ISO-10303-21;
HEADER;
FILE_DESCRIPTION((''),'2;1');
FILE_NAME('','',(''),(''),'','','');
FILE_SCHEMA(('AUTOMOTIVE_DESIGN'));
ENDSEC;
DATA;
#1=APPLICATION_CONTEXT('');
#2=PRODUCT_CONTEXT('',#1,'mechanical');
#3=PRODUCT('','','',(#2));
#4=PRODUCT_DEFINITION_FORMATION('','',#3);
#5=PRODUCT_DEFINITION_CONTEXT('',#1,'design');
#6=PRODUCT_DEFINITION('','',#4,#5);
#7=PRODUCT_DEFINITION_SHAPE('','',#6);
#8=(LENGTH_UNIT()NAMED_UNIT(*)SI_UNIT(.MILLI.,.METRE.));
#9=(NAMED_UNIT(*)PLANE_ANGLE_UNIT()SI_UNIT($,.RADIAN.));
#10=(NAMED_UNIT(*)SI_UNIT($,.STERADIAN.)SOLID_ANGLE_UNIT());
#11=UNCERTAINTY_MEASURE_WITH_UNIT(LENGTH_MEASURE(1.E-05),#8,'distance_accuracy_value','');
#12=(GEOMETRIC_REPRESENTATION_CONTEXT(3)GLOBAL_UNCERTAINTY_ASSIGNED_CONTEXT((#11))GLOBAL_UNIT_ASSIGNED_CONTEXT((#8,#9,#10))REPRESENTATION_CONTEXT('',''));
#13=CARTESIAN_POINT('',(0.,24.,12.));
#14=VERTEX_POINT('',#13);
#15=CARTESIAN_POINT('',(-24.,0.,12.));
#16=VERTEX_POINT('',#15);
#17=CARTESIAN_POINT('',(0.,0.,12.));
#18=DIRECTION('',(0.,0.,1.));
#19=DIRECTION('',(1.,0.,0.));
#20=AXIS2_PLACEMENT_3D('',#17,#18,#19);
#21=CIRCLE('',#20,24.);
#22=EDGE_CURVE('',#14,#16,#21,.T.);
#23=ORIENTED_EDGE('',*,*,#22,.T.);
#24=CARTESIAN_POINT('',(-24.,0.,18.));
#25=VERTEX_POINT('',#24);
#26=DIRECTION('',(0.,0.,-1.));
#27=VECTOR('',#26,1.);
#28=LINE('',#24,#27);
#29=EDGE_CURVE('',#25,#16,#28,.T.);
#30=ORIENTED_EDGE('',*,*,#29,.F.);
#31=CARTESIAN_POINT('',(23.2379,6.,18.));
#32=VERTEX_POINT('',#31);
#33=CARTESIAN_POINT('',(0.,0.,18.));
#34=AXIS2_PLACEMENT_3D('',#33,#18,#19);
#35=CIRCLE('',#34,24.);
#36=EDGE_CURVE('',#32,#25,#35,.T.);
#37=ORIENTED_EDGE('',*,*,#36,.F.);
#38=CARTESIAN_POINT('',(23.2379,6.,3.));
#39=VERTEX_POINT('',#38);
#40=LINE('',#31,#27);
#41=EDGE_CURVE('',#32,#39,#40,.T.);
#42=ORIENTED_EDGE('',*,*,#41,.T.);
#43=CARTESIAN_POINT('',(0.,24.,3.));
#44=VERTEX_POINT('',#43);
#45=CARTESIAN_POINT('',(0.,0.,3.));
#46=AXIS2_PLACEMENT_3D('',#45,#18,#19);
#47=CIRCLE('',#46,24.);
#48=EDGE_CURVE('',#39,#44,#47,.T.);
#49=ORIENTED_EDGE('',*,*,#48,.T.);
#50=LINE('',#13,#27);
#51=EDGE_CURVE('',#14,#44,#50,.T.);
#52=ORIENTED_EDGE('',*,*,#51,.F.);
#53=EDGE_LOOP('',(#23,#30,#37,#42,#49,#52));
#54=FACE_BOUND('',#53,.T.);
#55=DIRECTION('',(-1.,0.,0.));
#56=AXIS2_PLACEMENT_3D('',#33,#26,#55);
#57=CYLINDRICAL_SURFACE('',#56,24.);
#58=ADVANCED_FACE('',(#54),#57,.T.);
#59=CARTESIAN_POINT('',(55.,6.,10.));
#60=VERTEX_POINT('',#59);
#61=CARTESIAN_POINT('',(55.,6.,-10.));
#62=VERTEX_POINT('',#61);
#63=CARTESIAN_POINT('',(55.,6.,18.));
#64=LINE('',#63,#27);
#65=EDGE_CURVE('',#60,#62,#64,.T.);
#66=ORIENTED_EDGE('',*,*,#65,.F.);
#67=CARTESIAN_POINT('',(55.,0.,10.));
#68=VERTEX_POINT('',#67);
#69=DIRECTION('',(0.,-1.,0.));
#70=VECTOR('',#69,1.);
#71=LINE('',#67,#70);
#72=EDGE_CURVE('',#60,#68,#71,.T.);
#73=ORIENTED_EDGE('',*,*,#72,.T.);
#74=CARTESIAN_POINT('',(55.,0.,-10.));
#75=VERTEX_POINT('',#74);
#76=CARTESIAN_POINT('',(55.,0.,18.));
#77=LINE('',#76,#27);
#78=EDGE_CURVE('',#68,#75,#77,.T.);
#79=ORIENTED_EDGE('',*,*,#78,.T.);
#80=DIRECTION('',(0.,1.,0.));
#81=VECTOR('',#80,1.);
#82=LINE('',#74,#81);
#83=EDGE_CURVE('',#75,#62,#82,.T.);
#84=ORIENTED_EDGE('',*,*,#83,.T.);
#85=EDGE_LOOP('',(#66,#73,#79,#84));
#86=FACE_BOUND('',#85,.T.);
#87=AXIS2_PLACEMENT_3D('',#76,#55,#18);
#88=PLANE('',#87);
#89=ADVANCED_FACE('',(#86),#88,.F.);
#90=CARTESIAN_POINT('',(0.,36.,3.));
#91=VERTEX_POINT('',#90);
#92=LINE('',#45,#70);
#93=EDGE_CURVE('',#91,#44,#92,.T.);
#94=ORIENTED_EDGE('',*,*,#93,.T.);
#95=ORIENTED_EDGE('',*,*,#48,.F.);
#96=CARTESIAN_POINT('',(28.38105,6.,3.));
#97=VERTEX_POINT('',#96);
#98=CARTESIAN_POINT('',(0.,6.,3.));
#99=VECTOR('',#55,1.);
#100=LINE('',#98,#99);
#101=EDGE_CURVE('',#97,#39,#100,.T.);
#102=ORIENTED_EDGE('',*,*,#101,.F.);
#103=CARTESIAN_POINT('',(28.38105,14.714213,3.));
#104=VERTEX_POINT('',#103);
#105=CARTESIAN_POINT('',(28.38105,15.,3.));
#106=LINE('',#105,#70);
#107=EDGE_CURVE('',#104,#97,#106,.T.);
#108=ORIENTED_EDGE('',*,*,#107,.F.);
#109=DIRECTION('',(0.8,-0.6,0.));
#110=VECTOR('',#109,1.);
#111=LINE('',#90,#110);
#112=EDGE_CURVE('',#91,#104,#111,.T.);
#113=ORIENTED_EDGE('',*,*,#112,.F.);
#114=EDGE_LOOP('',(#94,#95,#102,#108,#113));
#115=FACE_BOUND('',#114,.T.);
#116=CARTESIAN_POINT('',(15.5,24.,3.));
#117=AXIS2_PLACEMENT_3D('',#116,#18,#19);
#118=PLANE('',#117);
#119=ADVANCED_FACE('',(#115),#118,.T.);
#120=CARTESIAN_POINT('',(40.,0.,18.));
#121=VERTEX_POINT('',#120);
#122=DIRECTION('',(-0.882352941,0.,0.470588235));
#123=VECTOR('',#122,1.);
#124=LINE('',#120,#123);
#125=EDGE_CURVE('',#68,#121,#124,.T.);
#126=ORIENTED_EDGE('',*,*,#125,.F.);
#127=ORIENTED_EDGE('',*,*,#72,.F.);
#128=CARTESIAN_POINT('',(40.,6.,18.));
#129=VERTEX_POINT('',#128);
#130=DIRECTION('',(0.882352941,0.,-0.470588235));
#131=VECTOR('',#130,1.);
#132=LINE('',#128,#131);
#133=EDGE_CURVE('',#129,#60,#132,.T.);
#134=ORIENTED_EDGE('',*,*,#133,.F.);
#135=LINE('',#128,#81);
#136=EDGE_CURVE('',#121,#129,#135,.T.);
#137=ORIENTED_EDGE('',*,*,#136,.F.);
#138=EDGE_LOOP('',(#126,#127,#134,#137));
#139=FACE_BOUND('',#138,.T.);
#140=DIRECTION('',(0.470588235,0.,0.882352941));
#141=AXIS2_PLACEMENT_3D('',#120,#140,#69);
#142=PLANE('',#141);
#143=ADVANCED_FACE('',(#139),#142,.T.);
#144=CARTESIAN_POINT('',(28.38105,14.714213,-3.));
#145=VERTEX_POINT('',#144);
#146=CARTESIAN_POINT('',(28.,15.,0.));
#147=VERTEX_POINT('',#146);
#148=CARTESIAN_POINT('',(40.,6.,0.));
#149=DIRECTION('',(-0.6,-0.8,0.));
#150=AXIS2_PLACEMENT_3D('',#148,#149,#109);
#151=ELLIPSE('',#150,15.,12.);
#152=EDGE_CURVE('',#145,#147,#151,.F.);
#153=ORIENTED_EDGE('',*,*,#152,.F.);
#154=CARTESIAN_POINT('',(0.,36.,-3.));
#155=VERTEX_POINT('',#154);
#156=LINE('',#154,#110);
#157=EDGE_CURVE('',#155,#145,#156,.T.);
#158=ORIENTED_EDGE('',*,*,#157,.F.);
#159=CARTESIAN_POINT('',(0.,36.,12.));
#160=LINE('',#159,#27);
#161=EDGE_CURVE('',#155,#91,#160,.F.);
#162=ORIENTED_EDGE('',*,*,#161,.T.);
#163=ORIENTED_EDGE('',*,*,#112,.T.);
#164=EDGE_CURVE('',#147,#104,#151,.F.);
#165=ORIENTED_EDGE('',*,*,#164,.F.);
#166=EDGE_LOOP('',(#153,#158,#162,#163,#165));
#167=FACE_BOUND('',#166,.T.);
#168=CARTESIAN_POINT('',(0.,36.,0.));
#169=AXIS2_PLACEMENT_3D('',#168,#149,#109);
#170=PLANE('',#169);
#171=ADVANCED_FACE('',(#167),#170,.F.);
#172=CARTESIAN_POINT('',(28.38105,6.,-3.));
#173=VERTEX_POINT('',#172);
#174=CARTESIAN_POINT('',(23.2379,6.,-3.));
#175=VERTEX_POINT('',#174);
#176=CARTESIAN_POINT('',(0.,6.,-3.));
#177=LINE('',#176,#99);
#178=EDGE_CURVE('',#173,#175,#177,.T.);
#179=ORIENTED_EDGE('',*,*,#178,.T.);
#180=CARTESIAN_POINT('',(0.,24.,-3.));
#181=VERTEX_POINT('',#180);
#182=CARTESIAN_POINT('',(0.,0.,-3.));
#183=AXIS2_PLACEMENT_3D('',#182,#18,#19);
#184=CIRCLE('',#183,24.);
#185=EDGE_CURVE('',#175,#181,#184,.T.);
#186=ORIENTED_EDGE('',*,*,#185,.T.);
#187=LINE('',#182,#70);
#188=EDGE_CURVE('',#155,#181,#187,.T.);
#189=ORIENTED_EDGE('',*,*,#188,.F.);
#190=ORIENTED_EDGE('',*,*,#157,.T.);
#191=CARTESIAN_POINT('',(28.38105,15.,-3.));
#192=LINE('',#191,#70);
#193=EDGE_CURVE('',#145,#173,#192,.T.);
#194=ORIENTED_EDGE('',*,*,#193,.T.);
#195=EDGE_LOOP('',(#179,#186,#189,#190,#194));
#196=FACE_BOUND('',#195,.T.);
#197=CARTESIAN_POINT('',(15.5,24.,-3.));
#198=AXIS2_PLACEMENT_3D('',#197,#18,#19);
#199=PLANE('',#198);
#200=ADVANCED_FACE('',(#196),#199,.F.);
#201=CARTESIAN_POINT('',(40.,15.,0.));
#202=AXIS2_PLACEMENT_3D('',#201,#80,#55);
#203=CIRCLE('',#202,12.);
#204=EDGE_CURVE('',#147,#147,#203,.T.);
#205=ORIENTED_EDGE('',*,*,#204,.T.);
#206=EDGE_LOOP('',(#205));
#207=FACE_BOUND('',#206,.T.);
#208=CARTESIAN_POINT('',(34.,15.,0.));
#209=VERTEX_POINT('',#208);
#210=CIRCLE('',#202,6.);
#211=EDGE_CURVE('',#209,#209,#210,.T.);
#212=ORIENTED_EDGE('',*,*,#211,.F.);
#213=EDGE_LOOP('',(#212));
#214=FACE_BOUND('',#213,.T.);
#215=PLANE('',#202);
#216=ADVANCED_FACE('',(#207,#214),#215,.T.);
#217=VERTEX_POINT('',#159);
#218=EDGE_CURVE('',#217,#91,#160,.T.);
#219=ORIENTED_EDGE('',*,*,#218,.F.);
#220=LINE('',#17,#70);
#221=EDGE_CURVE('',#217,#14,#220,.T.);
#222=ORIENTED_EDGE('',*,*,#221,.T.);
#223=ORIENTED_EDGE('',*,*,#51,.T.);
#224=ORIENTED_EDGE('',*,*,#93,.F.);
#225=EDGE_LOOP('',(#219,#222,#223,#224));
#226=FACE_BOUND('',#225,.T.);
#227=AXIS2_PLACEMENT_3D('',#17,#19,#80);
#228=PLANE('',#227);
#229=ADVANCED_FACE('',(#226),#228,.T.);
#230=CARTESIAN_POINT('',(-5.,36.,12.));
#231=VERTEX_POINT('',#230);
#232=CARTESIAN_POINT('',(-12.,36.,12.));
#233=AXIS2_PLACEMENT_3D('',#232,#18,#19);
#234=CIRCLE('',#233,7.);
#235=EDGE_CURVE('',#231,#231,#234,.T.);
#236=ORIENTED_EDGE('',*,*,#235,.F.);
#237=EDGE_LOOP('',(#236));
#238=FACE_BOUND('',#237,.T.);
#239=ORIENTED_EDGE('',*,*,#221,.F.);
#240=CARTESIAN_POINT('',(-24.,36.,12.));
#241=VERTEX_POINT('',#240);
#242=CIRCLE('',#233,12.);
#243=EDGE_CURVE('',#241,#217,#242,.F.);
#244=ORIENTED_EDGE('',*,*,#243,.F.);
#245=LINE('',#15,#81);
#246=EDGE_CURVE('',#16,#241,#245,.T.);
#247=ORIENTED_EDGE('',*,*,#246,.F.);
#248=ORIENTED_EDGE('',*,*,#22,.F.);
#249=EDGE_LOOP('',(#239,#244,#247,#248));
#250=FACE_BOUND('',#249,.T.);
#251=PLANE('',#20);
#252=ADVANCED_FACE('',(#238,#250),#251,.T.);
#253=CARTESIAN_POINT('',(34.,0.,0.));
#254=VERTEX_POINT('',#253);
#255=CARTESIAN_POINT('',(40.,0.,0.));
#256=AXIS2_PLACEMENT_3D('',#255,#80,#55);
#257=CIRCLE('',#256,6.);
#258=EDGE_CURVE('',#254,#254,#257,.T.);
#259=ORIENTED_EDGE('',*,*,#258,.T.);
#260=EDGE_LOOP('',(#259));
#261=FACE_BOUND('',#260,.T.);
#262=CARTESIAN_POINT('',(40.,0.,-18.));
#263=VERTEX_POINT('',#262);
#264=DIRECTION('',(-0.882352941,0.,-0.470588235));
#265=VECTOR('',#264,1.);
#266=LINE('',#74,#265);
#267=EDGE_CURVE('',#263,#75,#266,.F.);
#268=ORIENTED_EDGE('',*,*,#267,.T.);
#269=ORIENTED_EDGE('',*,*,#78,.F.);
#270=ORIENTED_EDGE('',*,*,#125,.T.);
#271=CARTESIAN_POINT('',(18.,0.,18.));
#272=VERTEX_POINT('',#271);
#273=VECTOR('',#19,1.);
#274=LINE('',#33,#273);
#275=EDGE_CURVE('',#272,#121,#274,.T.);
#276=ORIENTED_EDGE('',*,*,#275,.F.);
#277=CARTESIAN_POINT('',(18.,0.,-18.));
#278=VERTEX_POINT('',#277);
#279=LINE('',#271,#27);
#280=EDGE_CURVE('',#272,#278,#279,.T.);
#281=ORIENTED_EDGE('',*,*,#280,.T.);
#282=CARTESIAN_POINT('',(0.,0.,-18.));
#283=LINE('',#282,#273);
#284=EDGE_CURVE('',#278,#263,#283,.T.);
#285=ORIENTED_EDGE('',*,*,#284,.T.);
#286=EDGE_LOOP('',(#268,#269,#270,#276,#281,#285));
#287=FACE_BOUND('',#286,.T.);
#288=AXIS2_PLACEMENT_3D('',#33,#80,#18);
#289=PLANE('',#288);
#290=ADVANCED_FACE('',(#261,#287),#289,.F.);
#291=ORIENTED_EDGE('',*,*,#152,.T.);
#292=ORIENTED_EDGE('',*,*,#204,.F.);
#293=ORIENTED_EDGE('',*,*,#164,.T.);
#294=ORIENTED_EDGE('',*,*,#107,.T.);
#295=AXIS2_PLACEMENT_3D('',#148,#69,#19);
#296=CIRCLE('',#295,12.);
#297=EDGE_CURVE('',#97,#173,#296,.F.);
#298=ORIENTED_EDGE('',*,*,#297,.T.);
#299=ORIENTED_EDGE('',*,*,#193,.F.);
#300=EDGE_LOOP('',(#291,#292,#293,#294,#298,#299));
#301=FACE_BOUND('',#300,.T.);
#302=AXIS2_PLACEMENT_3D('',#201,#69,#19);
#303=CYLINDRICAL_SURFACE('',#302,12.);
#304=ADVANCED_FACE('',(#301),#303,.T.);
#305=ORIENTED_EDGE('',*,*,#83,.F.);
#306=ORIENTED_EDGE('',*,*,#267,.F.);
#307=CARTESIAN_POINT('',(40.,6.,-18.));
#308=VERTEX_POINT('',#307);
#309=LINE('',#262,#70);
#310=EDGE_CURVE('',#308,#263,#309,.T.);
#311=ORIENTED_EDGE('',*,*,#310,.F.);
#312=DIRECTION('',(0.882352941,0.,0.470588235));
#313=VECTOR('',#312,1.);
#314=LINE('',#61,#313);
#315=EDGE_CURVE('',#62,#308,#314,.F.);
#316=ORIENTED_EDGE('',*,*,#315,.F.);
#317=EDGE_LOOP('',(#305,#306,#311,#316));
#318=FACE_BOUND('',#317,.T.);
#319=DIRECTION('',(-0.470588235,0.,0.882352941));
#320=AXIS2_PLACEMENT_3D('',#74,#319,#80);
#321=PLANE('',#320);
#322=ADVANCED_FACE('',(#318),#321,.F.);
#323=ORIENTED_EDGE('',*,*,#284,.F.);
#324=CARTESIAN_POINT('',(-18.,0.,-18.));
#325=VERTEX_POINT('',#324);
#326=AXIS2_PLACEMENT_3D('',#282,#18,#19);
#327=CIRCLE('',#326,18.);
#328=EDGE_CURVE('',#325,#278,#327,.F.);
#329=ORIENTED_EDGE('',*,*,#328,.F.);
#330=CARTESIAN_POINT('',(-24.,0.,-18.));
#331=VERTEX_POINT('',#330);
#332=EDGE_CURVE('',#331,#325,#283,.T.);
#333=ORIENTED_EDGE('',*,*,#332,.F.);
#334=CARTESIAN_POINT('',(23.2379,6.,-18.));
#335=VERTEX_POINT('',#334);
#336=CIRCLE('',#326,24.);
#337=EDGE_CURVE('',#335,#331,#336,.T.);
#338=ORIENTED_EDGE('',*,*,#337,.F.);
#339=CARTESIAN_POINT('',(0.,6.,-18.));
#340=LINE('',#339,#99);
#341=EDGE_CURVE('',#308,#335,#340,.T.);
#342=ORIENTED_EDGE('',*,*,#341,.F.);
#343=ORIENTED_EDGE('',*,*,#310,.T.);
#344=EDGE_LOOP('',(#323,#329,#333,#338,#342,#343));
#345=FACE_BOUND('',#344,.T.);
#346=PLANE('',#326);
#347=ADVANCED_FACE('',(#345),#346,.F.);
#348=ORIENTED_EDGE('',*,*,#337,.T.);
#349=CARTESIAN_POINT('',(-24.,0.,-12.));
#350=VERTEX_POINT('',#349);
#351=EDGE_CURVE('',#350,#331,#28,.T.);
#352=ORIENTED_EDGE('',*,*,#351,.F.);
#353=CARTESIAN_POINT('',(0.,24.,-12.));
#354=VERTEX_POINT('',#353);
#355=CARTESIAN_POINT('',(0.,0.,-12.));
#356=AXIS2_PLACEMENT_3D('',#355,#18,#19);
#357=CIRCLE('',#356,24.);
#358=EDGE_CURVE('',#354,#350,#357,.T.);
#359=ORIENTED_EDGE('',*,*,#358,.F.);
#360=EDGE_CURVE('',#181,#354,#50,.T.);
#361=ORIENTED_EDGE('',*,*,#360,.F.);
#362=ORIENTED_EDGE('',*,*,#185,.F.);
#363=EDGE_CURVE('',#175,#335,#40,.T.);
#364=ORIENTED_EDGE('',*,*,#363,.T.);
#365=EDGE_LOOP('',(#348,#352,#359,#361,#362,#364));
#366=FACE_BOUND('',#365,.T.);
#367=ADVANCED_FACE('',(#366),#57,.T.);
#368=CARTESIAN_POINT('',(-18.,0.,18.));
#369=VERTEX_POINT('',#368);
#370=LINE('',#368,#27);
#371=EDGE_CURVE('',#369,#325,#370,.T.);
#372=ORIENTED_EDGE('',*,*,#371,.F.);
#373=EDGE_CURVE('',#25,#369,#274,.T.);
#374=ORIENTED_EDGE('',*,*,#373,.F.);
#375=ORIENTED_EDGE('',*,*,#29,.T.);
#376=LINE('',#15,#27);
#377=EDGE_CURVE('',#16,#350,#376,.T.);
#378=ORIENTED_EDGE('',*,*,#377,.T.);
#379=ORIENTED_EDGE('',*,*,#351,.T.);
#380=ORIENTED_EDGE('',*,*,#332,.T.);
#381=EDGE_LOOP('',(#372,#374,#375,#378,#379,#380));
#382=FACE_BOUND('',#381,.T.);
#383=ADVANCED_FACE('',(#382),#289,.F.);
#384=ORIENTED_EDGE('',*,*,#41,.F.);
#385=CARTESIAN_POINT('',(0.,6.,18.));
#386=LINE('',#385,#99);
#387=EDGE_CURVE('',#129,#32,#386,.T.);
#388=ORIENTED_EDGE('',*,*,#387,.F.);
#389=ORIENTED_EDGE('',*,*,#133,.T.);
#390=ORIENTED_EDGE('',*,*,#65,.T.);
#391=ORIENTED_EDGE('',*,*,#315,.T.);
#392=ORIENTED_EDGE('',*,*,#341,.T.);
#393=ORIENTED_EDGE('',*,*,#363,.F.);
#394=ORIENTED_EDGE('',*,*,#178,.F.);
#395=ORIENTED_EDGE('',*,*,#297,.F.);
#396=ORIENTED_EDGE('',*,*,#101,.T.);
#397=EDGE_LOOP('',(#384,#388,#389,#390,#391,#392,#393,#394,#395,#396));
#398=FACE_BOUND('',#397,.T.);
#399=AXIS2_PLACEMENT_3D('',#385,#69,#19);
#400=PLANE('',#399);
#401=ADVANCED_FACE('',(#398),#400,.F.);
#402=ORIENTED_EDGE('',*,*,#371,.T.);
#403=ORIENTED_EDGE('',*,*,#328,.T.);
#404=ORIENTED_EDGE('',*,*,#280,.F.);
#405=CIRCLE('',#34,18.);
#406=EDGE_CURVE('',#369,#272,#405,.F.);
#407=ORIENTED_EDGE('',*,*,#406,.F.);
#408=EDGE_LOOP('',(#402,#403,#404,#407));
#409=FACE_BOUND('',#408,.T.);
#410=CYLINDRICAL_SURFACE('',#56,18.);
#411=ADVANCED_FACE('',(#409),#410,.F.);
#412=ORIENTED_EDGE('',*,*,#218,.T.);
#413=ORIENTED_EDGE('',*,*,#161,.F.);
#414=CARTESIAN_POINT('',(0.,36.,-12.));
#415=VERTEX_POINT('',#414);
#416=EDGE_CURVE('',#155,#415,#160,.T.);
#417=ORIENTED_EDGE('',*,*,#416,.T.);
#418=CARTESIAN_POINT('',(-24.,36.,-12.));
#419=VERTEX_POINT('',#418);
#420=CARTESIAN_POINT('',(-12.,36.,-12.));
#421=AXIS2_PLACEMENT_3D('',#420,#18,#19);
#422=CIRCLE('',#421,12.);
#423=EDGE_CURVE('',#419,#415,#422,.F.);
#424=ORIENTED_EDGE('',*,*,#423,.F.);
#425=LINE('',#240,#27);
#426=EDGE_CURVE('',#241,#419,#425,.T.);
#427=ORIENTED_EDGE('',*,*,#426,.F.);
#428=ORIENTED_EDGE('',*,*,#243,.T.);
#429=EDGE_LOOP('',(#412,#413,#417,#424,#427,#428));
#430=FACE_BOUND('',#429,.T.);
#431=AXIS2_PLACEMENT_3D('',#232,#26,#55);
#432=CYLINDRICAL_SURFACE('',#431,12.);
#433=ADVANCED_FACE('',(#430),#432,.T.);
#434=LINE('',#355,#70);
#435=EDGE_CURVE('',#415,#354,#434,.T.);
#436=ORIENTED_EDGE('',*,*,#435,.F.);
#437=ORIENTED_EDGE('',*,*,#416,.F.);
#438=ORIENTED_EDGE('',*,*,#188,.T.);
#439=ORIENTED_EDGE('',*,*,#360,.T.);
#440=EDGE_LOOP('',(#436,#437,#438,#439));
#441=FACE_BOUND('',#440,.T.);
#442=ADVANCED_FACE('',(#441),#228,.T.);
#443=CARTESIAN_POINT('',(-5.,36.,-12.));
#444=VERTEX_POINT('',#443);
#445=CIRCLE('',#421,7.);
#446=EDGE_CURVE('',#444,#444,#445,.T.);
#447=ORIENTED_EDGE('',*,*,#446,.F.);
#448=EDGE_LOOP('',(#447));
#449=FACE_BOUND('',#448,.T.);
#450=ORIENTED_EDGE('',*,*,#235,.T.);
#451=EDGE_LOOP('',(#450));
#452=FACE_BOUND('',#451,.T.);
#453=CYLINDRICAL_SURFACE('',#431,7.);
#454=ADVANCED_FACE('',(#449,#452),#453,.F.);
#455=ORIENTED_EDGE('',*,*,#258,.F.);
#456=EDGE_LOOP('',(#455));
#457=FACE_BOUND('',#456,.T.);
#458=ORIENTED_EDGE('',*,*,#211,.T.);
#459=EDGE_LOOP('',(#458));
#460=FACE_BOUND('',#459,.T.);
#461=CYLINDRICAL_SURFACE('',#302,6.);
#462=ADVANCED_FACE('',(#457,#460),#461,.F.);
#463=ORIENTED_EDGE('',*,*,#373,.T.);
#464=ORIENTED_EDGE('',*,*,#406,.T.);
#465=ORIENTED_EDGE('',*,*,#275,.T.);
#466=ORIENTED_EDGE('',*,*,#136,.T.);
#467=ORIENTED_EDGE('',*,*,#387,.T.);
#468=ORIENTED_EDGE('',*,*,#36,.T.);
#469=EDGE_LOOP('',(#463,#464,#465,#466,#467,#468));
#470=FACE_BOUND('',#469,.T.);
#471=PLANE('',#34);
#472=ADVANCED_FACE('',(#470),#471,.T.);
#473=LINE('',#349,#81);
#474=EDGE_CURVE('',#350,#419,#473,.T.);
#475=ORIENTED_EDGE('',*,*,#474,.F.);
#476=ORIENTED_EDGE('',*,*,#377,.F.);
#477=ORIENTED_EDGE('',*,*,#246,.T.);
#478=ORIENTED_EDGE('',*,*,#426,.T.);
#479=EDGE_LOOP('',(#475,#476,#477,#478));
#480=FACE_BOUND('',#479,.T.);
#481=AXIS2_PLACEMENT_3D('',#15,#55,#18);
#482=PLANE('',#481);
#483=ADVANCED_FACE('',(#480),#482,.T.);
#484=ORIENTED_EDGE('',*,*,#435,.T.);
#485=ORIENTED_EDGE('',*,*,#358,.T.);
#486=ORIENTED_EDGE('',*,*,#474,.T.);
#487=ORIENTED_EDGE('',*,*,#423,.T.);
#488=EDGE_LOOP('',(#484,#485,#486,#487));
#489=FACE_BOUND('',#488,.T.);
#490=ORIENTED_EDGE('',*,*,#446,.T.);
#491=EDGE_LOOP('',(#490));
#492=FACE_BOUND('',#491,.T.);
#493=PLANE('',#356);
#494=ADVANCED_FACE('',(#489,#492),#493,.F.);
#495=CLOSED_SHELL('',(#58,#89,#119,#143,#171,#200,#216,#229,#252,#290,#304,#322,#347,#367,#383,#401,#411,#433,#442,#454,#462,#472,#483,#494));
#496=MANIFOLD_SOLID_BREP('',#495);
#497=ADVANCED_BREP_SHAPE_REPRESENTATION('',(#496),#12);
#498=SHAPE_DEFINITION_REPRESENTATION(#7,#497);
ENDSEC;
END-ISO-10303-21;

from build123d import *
from build123d.topology import SkipClean

# Parameters (mm, degrees)
BOSS_EXTRUDE1_DEPTH = 18
SKETCH1_3_R         = 7
BOSS_EXTRUDE2_DEPTH = 12
SKETCH2_R           = 12
SKETCH2_R_2         = 6
BOSS_EXTRUDE3_DEPTH = 9
RIB1_START          = -3
RIB1_DEPTH          = 6
CHAMFER1_SIZE       = 8
CHAMFER1_SIZE2      = 15
CHAMFER2_SIZE       = 15
CHAMFER2_SIZE2      = 8
SKETCH2_2_R         = 6
CUT_EXTRUDE1_DEPTH  = 72.505244563


# Read off the part's stored shape, not the designer's step: Rib1
with BuildPart() as part:
    # Sketch1 → Boss-Extrude1 (new, symmetric)
    with BuildSketch(Plane.XY):
        with BuildLine():
            Line((18, 0), (24, 0))
            ThreePointArc((24, 0), (0, 24), (-24, 0))
            Line((-24, 0), (-18, 0))
            ThreePointArc((-18, 0), (0, 18), (18, 0))
        make_face()
        with BuildLine():
            Line((55, 6), (23.237900077, 6))
            ThreePointArc((23.237900077, 6), (23.80871271, 3.02410302), (24, 0))
            Line((24, 0), (55, 0))
            Line((55, 0), (55, 6))
        make_face()
    extrude(amount=BOSS_EXTRUDE1_DEPTH, both=True)

    # Sketch1<3> → Boss-Extrude2 (add, symmetric)
    with BuildSketch(Plane.XY):
        with BuildLine():
            Line((-24, 36), (-24, 0))
            ThreePointArc((-24, 0), (-16.970562748, 16.970562748), (0, 24))
            Line((0, 24), (0, 36))
            ThreePointArc((0, 36), (-12, 48), (-24, 36))
        make_face()
        with Locations((-12, 36)):
            Circle(SKETCH1_3_R, mode=Mode.SUBTRACT)
    extrude(amount=BOSS_EXTRUDE2_DEPTH, both=True)

    # Sketch2 → Boss-Extrude3 (add)
    with BuildSketch(Plane(origin=(0, 6, 0), x_dir=(1, 0, 0), z_dir=(0, 1, 0))):
        with Locations((40, 0)):
            Circle(SKETCH2_R)
        with Locations(Location((40, 0, 0), (0, 0, 180))):
            Circle(SKETCH2_R_2, mode=Mode.SUBTRACT)
    extrude(amount=BOSS_EXTRUDE3_DEPTH)

    # Rib1 outline → Rib1 (add)
    with SkipClean():  # the faces are left unmerged after this step: merging them gives an invalid solid
        with BuildSketch(Plane.XY.offset(RIB1_START)):
            with BuildLine():
                Line((28.381049961, 14.714212529), (0, 36))
                Line((0, 36), (0, 24))
                ThreePointArc((0, 24), (14.696938456, 18.973665961), (23.237900077, 6))
                Line((23.237900077, 6), (30, 6))
                Line((30, 6), (30, 13.5))
                Line((30, 13.5), (28.381049961, 14.714212529))
            make_face()
        extrude(amount=RIB1_DEPTH)

    # Chamfer1
    chamfer1_edges = [part.edges().sort_by_distance(p)[0] for p in [
        (55, 3, 18),
    ]]
    chamfer1_side = [part.faces().sort_by_distance(p)[0] for p in [
        (55, 3, 0),
    ]]
    chamfer(chamfer1_edges, length=CHAMFER1_SIZE, length2=CHAMFER1_SIZE2, reference=chamfer1_side[0])

    # Chamfer2
    chamfer2_edges = [part.edges().sort_by_distance(p)[0] for p in [
        (55, 3, -18),
    ]]
    chamfer2_side = [part.faces().sort_by_distance(p)[0] for p in [
        (36.5, 0.825651258, -18),
    ]]
    chamfer(chamfer2_edges, length=CHAMFER2_SIZE, length2=CHAMFER2_SIZE2, reference=chamfer2_side[0])

    # Sketch2<2> → Cut-Extrude1 (cut, through all)
    with BuildSketch(Plane(origin=(0, 6, 0), x_dir=(1, 0, 0), z_dir=(0, 1, 0))):
        with Locations(Location((40, 0, 0), (0, 0, 180))):
            Circle(SKETCH2_2_R)
    extrude(amount=-CUT_EXTRUDE1_DEPTH, mode=Mode.SUBTRACT)


solid = part.part
